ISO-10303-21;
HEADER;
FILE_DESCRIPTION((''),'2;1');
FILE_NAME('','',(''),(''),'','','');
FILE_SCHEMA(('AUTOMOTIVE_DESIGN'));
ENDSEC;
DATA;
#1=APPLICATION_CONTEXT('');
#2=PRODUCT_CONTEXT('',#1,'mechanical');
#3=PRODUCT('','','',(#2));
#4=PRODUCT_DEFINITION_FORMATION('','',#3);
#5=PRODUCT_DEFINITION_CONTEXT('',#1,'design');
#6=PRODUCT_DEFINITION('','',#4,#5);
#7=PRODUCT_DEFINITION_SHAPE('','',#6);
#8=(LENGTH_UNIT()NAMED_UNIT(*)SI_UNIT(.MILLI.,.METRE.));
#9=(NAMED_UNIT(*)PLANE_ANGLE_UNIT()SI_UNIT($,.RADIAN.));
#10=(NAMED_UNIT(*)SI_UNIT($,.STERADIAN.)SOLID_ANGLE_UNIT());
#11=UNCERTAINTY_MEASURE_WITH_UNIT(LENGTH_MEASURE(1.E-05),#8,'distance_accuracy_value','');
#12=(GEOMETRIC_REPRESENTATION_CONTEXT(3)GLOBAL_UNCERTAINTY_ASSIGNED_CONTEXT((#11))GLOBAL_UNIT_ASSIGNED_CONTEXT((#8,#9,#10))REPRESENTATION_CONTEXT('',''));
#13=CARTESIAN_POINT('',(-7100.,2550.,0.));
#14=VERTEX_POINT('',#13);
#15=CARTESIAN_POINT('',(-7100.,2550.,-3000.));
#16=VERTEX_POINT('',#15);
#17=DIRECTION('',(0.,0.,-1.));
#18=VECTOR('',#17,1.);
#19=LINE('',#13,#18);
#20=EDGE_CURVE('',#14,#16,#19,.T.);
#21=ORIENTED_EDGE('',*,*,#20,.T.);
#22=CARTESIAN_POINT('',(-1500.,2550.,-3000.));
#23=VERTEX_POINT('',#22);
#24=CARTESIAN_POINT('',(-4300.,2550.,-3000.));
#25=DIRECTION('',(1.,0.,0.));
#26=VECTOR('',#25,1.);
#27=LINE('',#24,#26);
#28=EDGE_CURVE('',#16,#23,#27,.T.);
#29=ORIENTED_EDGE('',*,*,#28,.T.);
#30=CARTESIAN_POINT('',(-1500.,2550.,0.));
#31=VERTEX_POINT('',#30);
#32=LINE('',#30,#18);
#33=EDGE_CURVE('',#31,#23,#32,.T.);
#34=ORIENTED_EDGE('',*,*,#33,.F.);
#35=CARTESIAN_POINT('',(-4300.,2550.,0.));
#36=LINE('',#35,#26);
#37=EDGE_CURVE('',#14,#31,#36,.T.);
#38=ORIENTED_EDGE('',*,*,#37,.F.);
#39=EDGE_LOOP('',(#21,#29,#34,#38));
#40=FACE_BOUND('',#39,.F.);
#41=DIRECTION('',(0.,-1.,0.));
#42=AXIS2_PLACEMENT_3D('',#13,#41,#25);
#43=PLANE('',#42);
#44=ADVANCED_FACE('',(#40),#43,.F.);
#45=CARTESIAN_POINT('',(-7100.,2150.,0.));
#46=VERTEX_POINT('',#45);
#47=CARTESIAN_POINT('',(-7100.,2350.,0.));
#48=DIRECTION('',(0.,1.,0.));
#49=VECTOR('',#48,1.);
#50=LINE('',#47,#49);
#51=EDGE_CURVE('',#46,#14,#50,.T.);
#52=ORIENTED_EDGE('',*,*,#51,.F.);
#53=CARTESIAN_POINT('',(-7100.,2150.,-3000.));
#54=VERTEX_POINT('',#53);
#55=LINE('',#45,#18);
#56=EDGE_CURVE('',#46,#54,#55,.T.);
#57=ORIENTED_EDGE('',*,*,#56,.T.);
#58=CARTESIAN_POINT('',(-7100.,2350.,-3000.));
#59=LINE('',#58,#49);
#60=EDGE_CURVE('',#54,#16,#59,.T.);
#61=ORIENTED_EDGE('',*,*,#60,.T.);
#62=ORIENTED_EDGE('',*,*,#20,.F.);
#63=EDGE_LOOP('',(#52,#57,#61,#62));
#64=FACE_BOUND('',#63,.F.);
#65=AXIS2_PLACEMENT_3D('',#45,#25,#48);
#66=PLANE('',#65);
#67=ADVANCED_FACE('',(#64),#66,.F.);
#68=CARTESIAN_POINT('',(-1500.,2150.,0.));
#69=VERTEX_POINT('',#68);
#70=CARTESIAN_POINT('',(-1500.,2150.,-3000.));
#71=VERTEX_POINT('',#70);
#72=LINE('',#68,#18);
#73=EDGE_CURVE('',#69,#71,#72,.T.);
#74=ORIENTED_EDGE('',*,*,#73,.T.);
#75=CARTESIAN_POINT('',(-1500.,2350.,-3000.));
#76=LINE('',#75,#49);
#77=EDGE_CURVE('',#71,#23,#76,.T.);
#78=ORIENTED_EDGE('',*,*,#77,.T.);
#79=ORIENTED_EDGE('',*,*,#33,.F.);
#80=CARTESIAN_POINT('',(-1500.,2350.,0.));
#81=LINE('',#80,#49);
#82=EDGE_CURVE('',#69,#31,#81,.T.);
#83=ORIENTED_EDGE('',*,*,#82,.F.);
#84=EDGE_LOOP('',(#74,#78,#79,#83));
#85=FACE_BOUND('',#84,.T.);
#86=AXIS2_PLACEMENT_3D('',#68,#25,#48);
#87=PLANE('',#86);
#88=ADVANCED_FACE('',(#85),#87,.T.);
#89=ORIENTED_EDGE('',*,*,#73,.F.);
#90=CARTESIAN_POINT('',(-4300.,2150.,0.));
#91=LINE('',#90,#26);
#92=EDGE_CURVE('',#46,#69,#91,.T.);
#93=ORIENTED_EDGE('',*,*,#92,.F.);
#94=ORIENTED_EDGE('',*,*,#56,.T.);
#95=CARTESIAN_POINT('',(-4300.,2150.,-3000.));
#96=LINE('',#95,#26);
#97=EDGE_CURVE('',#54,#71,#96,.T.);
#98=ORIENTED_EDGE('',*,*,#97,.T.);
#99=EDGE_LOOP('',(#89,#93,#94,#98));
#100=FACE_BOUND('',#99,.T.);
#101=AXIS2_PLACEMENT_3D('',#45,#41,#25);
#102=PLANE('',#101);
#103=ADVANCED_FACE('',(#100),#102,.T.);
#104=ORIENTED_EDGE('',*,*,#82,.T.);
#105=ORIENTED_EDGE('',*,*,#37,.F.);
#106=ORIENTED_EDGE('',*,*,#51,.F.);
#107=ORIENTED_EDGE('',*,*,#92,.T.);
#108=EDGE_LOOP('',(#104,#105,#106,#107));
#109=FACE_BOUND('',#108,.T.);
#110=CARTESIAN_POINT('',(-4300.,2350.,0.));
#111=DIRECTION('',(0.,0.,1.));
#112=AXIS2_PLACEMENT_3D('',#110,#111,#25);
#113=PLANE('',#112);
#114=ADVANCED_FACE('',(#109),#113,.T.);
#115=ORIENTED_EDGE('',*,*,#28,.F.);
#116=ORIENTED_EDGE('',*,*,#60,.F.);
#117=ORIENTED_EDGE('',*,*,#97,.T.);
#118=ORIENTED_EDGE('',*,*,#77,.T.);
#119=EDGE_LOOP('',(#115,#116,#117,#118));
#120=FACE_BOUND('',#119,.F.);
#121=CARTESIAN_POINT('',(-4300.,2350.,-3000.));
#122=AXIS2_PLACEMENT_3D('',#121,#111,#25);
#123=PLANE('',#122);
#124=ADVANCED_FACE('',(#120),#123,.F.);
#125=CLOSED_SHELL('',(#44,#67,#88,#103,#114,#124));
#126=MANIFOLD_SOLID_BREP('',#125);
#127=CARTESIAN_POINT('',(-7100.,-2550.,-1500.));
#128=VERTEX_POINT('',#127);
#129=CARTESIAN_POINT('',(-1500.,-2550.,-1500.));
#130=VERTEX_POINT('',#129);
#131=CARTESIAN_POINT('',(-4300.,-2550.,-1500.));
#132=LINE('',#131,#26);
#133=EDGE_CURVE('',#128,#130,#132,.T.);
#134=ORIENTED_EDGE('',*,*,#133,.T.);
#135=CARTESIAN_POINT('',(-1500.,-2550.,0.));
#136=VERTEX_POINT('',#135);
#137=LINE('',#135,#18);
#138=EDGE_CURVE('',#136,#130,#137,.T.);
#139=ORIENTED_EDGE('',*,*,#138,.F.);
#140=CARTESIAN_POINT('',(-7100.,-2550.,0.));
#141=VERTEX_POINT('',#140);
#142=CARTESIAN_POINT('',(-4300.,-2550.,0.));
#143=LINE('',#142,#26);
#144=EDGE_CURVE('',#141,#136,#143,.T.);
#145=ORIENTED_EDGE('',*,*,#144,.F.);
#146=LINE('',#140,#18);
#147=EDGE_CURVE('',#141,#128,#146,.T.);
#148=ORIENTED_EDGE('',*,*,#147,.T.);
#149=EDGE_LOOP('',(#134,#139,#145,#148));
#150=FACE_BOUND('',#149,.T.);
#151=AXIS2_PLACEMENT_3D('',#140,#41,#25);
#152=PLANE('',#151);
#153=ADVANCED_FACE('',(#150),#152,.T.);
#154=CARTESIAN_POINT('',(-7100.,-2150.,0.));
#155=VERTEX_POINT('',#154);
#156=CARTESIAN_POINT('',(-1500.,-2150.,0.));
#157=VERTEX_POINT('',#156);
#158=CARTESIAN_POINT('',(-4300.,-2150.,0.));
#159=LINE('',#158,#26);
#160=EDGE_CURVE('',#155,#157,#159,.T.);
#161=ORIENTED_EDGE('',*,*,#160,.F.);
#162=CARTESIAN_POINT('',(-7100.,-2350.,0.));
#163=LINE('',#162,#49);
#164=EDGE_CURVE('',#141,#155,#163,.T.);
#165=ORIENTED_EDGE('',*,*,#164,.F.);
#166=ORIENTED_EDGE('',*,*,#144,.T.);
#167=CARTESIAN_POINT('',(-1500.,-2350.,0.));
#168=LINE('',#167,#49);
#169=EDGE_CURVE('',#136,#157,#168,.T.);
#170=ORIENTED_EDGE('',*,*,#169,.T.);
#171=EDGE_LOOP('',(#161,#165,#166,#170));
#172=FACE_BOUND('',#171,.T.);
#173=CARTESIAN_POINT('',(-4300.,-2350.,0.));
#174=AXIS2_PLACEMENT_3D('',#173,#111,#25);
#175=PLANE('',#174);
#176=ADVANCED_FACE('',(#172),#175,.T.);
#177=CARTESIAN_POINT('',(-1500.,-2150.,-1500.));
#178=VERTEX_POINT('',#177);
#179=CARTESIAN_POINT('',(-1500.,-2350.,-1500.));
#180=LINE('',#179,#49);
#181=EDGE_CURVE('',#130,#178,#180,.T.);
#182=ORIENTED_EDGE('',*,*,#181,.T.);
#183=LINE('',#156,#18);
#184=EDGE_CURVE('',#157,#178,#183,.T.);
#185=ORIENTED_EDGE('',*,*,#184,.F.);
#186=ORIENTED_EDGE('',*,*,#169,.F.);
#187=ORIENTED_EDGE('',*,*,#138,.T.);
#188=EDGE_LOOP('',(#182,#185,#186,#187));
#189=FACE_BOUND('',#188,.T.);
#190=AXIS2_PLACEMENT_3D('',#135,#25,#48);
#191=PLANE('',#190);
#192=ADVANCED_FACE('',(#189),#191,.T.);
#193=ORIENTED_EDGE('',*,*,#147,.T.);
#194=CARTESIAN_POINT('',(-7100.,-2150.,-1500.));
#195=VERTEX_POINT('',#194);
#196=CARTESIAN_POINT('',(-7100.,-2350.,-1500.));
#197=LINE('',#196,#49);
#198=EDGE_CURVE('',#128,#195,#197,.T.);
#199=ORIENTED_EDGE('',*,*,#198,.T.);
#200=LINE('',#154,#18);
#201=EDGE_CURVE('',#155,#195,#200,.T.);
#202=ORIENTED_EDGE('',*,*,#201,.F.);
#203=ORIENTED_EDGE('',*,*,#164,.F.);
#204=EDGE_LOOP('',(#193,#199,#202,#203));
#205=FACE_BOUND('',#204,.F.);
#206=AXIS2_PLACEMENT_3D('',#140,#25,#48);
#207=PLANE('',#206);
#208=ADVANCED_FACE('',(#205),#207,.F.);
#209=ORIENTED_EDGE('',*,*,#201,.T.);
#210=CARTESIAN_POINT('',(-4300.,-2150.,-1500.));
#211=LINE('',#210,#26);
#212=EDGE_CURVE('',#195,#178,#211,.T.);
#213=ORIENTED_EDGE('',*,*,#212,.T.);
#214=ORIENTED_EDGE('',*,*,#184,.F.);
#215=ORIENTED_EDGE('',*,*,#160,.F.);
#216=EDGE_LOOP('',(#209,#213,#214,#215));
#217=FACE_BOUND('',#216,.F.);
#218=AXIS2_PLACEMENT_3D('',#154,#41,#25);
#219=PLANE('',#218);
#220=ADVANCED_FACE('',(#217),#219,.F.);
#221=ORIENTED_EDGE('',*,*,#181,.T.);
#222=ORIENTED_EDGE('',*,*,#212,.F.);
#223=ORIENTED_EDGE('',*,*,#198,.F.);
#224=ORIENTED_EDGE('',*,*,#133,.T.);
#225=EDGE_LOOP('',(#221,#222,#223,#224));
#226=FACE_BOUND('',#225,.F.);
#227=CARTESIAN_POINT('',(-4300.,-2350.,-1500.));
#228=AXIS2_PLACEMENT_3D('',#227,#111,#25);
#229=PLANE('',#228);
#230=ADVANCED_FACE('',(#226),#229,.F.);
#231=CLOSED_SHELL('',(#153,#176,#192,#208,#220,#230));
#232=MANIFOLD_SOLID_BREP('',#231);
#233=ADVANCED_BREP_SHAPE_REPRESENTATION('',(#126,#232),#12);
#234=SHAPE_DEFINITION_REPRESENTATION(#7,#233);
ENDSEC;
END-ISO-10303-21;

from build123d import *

# Parameters (mm, degrees)
F0_W     = 5600
F0_H     = 400
F1_DEPTH = 1500
F2_DEPTH = 3000


# Not quite as in the source:
# - the program builds the solid bodies; features that only make, move or delete a surface that nothing else refers to are left out


with BuildPart() as f1:
    # F0 (on Top) → F1 (new body)
    with BuildSketch(Plane.XY):
        with Locations((-4300, -2350)):
            Rectangle(F0_W, F0_H)
    extrude(amount=-F1_DEPTH)


with BuildPart() as f2:
    # F0 (on Top) → F2 (new body)
    with BuildSketch(Plane.XY):
        with Locations((-4300, 2350)):
            Rectangle(F0_W, F0_H)
    extrude(amount=-F2_DEPTH)


solid = Compound([f1.part, f2.part])
